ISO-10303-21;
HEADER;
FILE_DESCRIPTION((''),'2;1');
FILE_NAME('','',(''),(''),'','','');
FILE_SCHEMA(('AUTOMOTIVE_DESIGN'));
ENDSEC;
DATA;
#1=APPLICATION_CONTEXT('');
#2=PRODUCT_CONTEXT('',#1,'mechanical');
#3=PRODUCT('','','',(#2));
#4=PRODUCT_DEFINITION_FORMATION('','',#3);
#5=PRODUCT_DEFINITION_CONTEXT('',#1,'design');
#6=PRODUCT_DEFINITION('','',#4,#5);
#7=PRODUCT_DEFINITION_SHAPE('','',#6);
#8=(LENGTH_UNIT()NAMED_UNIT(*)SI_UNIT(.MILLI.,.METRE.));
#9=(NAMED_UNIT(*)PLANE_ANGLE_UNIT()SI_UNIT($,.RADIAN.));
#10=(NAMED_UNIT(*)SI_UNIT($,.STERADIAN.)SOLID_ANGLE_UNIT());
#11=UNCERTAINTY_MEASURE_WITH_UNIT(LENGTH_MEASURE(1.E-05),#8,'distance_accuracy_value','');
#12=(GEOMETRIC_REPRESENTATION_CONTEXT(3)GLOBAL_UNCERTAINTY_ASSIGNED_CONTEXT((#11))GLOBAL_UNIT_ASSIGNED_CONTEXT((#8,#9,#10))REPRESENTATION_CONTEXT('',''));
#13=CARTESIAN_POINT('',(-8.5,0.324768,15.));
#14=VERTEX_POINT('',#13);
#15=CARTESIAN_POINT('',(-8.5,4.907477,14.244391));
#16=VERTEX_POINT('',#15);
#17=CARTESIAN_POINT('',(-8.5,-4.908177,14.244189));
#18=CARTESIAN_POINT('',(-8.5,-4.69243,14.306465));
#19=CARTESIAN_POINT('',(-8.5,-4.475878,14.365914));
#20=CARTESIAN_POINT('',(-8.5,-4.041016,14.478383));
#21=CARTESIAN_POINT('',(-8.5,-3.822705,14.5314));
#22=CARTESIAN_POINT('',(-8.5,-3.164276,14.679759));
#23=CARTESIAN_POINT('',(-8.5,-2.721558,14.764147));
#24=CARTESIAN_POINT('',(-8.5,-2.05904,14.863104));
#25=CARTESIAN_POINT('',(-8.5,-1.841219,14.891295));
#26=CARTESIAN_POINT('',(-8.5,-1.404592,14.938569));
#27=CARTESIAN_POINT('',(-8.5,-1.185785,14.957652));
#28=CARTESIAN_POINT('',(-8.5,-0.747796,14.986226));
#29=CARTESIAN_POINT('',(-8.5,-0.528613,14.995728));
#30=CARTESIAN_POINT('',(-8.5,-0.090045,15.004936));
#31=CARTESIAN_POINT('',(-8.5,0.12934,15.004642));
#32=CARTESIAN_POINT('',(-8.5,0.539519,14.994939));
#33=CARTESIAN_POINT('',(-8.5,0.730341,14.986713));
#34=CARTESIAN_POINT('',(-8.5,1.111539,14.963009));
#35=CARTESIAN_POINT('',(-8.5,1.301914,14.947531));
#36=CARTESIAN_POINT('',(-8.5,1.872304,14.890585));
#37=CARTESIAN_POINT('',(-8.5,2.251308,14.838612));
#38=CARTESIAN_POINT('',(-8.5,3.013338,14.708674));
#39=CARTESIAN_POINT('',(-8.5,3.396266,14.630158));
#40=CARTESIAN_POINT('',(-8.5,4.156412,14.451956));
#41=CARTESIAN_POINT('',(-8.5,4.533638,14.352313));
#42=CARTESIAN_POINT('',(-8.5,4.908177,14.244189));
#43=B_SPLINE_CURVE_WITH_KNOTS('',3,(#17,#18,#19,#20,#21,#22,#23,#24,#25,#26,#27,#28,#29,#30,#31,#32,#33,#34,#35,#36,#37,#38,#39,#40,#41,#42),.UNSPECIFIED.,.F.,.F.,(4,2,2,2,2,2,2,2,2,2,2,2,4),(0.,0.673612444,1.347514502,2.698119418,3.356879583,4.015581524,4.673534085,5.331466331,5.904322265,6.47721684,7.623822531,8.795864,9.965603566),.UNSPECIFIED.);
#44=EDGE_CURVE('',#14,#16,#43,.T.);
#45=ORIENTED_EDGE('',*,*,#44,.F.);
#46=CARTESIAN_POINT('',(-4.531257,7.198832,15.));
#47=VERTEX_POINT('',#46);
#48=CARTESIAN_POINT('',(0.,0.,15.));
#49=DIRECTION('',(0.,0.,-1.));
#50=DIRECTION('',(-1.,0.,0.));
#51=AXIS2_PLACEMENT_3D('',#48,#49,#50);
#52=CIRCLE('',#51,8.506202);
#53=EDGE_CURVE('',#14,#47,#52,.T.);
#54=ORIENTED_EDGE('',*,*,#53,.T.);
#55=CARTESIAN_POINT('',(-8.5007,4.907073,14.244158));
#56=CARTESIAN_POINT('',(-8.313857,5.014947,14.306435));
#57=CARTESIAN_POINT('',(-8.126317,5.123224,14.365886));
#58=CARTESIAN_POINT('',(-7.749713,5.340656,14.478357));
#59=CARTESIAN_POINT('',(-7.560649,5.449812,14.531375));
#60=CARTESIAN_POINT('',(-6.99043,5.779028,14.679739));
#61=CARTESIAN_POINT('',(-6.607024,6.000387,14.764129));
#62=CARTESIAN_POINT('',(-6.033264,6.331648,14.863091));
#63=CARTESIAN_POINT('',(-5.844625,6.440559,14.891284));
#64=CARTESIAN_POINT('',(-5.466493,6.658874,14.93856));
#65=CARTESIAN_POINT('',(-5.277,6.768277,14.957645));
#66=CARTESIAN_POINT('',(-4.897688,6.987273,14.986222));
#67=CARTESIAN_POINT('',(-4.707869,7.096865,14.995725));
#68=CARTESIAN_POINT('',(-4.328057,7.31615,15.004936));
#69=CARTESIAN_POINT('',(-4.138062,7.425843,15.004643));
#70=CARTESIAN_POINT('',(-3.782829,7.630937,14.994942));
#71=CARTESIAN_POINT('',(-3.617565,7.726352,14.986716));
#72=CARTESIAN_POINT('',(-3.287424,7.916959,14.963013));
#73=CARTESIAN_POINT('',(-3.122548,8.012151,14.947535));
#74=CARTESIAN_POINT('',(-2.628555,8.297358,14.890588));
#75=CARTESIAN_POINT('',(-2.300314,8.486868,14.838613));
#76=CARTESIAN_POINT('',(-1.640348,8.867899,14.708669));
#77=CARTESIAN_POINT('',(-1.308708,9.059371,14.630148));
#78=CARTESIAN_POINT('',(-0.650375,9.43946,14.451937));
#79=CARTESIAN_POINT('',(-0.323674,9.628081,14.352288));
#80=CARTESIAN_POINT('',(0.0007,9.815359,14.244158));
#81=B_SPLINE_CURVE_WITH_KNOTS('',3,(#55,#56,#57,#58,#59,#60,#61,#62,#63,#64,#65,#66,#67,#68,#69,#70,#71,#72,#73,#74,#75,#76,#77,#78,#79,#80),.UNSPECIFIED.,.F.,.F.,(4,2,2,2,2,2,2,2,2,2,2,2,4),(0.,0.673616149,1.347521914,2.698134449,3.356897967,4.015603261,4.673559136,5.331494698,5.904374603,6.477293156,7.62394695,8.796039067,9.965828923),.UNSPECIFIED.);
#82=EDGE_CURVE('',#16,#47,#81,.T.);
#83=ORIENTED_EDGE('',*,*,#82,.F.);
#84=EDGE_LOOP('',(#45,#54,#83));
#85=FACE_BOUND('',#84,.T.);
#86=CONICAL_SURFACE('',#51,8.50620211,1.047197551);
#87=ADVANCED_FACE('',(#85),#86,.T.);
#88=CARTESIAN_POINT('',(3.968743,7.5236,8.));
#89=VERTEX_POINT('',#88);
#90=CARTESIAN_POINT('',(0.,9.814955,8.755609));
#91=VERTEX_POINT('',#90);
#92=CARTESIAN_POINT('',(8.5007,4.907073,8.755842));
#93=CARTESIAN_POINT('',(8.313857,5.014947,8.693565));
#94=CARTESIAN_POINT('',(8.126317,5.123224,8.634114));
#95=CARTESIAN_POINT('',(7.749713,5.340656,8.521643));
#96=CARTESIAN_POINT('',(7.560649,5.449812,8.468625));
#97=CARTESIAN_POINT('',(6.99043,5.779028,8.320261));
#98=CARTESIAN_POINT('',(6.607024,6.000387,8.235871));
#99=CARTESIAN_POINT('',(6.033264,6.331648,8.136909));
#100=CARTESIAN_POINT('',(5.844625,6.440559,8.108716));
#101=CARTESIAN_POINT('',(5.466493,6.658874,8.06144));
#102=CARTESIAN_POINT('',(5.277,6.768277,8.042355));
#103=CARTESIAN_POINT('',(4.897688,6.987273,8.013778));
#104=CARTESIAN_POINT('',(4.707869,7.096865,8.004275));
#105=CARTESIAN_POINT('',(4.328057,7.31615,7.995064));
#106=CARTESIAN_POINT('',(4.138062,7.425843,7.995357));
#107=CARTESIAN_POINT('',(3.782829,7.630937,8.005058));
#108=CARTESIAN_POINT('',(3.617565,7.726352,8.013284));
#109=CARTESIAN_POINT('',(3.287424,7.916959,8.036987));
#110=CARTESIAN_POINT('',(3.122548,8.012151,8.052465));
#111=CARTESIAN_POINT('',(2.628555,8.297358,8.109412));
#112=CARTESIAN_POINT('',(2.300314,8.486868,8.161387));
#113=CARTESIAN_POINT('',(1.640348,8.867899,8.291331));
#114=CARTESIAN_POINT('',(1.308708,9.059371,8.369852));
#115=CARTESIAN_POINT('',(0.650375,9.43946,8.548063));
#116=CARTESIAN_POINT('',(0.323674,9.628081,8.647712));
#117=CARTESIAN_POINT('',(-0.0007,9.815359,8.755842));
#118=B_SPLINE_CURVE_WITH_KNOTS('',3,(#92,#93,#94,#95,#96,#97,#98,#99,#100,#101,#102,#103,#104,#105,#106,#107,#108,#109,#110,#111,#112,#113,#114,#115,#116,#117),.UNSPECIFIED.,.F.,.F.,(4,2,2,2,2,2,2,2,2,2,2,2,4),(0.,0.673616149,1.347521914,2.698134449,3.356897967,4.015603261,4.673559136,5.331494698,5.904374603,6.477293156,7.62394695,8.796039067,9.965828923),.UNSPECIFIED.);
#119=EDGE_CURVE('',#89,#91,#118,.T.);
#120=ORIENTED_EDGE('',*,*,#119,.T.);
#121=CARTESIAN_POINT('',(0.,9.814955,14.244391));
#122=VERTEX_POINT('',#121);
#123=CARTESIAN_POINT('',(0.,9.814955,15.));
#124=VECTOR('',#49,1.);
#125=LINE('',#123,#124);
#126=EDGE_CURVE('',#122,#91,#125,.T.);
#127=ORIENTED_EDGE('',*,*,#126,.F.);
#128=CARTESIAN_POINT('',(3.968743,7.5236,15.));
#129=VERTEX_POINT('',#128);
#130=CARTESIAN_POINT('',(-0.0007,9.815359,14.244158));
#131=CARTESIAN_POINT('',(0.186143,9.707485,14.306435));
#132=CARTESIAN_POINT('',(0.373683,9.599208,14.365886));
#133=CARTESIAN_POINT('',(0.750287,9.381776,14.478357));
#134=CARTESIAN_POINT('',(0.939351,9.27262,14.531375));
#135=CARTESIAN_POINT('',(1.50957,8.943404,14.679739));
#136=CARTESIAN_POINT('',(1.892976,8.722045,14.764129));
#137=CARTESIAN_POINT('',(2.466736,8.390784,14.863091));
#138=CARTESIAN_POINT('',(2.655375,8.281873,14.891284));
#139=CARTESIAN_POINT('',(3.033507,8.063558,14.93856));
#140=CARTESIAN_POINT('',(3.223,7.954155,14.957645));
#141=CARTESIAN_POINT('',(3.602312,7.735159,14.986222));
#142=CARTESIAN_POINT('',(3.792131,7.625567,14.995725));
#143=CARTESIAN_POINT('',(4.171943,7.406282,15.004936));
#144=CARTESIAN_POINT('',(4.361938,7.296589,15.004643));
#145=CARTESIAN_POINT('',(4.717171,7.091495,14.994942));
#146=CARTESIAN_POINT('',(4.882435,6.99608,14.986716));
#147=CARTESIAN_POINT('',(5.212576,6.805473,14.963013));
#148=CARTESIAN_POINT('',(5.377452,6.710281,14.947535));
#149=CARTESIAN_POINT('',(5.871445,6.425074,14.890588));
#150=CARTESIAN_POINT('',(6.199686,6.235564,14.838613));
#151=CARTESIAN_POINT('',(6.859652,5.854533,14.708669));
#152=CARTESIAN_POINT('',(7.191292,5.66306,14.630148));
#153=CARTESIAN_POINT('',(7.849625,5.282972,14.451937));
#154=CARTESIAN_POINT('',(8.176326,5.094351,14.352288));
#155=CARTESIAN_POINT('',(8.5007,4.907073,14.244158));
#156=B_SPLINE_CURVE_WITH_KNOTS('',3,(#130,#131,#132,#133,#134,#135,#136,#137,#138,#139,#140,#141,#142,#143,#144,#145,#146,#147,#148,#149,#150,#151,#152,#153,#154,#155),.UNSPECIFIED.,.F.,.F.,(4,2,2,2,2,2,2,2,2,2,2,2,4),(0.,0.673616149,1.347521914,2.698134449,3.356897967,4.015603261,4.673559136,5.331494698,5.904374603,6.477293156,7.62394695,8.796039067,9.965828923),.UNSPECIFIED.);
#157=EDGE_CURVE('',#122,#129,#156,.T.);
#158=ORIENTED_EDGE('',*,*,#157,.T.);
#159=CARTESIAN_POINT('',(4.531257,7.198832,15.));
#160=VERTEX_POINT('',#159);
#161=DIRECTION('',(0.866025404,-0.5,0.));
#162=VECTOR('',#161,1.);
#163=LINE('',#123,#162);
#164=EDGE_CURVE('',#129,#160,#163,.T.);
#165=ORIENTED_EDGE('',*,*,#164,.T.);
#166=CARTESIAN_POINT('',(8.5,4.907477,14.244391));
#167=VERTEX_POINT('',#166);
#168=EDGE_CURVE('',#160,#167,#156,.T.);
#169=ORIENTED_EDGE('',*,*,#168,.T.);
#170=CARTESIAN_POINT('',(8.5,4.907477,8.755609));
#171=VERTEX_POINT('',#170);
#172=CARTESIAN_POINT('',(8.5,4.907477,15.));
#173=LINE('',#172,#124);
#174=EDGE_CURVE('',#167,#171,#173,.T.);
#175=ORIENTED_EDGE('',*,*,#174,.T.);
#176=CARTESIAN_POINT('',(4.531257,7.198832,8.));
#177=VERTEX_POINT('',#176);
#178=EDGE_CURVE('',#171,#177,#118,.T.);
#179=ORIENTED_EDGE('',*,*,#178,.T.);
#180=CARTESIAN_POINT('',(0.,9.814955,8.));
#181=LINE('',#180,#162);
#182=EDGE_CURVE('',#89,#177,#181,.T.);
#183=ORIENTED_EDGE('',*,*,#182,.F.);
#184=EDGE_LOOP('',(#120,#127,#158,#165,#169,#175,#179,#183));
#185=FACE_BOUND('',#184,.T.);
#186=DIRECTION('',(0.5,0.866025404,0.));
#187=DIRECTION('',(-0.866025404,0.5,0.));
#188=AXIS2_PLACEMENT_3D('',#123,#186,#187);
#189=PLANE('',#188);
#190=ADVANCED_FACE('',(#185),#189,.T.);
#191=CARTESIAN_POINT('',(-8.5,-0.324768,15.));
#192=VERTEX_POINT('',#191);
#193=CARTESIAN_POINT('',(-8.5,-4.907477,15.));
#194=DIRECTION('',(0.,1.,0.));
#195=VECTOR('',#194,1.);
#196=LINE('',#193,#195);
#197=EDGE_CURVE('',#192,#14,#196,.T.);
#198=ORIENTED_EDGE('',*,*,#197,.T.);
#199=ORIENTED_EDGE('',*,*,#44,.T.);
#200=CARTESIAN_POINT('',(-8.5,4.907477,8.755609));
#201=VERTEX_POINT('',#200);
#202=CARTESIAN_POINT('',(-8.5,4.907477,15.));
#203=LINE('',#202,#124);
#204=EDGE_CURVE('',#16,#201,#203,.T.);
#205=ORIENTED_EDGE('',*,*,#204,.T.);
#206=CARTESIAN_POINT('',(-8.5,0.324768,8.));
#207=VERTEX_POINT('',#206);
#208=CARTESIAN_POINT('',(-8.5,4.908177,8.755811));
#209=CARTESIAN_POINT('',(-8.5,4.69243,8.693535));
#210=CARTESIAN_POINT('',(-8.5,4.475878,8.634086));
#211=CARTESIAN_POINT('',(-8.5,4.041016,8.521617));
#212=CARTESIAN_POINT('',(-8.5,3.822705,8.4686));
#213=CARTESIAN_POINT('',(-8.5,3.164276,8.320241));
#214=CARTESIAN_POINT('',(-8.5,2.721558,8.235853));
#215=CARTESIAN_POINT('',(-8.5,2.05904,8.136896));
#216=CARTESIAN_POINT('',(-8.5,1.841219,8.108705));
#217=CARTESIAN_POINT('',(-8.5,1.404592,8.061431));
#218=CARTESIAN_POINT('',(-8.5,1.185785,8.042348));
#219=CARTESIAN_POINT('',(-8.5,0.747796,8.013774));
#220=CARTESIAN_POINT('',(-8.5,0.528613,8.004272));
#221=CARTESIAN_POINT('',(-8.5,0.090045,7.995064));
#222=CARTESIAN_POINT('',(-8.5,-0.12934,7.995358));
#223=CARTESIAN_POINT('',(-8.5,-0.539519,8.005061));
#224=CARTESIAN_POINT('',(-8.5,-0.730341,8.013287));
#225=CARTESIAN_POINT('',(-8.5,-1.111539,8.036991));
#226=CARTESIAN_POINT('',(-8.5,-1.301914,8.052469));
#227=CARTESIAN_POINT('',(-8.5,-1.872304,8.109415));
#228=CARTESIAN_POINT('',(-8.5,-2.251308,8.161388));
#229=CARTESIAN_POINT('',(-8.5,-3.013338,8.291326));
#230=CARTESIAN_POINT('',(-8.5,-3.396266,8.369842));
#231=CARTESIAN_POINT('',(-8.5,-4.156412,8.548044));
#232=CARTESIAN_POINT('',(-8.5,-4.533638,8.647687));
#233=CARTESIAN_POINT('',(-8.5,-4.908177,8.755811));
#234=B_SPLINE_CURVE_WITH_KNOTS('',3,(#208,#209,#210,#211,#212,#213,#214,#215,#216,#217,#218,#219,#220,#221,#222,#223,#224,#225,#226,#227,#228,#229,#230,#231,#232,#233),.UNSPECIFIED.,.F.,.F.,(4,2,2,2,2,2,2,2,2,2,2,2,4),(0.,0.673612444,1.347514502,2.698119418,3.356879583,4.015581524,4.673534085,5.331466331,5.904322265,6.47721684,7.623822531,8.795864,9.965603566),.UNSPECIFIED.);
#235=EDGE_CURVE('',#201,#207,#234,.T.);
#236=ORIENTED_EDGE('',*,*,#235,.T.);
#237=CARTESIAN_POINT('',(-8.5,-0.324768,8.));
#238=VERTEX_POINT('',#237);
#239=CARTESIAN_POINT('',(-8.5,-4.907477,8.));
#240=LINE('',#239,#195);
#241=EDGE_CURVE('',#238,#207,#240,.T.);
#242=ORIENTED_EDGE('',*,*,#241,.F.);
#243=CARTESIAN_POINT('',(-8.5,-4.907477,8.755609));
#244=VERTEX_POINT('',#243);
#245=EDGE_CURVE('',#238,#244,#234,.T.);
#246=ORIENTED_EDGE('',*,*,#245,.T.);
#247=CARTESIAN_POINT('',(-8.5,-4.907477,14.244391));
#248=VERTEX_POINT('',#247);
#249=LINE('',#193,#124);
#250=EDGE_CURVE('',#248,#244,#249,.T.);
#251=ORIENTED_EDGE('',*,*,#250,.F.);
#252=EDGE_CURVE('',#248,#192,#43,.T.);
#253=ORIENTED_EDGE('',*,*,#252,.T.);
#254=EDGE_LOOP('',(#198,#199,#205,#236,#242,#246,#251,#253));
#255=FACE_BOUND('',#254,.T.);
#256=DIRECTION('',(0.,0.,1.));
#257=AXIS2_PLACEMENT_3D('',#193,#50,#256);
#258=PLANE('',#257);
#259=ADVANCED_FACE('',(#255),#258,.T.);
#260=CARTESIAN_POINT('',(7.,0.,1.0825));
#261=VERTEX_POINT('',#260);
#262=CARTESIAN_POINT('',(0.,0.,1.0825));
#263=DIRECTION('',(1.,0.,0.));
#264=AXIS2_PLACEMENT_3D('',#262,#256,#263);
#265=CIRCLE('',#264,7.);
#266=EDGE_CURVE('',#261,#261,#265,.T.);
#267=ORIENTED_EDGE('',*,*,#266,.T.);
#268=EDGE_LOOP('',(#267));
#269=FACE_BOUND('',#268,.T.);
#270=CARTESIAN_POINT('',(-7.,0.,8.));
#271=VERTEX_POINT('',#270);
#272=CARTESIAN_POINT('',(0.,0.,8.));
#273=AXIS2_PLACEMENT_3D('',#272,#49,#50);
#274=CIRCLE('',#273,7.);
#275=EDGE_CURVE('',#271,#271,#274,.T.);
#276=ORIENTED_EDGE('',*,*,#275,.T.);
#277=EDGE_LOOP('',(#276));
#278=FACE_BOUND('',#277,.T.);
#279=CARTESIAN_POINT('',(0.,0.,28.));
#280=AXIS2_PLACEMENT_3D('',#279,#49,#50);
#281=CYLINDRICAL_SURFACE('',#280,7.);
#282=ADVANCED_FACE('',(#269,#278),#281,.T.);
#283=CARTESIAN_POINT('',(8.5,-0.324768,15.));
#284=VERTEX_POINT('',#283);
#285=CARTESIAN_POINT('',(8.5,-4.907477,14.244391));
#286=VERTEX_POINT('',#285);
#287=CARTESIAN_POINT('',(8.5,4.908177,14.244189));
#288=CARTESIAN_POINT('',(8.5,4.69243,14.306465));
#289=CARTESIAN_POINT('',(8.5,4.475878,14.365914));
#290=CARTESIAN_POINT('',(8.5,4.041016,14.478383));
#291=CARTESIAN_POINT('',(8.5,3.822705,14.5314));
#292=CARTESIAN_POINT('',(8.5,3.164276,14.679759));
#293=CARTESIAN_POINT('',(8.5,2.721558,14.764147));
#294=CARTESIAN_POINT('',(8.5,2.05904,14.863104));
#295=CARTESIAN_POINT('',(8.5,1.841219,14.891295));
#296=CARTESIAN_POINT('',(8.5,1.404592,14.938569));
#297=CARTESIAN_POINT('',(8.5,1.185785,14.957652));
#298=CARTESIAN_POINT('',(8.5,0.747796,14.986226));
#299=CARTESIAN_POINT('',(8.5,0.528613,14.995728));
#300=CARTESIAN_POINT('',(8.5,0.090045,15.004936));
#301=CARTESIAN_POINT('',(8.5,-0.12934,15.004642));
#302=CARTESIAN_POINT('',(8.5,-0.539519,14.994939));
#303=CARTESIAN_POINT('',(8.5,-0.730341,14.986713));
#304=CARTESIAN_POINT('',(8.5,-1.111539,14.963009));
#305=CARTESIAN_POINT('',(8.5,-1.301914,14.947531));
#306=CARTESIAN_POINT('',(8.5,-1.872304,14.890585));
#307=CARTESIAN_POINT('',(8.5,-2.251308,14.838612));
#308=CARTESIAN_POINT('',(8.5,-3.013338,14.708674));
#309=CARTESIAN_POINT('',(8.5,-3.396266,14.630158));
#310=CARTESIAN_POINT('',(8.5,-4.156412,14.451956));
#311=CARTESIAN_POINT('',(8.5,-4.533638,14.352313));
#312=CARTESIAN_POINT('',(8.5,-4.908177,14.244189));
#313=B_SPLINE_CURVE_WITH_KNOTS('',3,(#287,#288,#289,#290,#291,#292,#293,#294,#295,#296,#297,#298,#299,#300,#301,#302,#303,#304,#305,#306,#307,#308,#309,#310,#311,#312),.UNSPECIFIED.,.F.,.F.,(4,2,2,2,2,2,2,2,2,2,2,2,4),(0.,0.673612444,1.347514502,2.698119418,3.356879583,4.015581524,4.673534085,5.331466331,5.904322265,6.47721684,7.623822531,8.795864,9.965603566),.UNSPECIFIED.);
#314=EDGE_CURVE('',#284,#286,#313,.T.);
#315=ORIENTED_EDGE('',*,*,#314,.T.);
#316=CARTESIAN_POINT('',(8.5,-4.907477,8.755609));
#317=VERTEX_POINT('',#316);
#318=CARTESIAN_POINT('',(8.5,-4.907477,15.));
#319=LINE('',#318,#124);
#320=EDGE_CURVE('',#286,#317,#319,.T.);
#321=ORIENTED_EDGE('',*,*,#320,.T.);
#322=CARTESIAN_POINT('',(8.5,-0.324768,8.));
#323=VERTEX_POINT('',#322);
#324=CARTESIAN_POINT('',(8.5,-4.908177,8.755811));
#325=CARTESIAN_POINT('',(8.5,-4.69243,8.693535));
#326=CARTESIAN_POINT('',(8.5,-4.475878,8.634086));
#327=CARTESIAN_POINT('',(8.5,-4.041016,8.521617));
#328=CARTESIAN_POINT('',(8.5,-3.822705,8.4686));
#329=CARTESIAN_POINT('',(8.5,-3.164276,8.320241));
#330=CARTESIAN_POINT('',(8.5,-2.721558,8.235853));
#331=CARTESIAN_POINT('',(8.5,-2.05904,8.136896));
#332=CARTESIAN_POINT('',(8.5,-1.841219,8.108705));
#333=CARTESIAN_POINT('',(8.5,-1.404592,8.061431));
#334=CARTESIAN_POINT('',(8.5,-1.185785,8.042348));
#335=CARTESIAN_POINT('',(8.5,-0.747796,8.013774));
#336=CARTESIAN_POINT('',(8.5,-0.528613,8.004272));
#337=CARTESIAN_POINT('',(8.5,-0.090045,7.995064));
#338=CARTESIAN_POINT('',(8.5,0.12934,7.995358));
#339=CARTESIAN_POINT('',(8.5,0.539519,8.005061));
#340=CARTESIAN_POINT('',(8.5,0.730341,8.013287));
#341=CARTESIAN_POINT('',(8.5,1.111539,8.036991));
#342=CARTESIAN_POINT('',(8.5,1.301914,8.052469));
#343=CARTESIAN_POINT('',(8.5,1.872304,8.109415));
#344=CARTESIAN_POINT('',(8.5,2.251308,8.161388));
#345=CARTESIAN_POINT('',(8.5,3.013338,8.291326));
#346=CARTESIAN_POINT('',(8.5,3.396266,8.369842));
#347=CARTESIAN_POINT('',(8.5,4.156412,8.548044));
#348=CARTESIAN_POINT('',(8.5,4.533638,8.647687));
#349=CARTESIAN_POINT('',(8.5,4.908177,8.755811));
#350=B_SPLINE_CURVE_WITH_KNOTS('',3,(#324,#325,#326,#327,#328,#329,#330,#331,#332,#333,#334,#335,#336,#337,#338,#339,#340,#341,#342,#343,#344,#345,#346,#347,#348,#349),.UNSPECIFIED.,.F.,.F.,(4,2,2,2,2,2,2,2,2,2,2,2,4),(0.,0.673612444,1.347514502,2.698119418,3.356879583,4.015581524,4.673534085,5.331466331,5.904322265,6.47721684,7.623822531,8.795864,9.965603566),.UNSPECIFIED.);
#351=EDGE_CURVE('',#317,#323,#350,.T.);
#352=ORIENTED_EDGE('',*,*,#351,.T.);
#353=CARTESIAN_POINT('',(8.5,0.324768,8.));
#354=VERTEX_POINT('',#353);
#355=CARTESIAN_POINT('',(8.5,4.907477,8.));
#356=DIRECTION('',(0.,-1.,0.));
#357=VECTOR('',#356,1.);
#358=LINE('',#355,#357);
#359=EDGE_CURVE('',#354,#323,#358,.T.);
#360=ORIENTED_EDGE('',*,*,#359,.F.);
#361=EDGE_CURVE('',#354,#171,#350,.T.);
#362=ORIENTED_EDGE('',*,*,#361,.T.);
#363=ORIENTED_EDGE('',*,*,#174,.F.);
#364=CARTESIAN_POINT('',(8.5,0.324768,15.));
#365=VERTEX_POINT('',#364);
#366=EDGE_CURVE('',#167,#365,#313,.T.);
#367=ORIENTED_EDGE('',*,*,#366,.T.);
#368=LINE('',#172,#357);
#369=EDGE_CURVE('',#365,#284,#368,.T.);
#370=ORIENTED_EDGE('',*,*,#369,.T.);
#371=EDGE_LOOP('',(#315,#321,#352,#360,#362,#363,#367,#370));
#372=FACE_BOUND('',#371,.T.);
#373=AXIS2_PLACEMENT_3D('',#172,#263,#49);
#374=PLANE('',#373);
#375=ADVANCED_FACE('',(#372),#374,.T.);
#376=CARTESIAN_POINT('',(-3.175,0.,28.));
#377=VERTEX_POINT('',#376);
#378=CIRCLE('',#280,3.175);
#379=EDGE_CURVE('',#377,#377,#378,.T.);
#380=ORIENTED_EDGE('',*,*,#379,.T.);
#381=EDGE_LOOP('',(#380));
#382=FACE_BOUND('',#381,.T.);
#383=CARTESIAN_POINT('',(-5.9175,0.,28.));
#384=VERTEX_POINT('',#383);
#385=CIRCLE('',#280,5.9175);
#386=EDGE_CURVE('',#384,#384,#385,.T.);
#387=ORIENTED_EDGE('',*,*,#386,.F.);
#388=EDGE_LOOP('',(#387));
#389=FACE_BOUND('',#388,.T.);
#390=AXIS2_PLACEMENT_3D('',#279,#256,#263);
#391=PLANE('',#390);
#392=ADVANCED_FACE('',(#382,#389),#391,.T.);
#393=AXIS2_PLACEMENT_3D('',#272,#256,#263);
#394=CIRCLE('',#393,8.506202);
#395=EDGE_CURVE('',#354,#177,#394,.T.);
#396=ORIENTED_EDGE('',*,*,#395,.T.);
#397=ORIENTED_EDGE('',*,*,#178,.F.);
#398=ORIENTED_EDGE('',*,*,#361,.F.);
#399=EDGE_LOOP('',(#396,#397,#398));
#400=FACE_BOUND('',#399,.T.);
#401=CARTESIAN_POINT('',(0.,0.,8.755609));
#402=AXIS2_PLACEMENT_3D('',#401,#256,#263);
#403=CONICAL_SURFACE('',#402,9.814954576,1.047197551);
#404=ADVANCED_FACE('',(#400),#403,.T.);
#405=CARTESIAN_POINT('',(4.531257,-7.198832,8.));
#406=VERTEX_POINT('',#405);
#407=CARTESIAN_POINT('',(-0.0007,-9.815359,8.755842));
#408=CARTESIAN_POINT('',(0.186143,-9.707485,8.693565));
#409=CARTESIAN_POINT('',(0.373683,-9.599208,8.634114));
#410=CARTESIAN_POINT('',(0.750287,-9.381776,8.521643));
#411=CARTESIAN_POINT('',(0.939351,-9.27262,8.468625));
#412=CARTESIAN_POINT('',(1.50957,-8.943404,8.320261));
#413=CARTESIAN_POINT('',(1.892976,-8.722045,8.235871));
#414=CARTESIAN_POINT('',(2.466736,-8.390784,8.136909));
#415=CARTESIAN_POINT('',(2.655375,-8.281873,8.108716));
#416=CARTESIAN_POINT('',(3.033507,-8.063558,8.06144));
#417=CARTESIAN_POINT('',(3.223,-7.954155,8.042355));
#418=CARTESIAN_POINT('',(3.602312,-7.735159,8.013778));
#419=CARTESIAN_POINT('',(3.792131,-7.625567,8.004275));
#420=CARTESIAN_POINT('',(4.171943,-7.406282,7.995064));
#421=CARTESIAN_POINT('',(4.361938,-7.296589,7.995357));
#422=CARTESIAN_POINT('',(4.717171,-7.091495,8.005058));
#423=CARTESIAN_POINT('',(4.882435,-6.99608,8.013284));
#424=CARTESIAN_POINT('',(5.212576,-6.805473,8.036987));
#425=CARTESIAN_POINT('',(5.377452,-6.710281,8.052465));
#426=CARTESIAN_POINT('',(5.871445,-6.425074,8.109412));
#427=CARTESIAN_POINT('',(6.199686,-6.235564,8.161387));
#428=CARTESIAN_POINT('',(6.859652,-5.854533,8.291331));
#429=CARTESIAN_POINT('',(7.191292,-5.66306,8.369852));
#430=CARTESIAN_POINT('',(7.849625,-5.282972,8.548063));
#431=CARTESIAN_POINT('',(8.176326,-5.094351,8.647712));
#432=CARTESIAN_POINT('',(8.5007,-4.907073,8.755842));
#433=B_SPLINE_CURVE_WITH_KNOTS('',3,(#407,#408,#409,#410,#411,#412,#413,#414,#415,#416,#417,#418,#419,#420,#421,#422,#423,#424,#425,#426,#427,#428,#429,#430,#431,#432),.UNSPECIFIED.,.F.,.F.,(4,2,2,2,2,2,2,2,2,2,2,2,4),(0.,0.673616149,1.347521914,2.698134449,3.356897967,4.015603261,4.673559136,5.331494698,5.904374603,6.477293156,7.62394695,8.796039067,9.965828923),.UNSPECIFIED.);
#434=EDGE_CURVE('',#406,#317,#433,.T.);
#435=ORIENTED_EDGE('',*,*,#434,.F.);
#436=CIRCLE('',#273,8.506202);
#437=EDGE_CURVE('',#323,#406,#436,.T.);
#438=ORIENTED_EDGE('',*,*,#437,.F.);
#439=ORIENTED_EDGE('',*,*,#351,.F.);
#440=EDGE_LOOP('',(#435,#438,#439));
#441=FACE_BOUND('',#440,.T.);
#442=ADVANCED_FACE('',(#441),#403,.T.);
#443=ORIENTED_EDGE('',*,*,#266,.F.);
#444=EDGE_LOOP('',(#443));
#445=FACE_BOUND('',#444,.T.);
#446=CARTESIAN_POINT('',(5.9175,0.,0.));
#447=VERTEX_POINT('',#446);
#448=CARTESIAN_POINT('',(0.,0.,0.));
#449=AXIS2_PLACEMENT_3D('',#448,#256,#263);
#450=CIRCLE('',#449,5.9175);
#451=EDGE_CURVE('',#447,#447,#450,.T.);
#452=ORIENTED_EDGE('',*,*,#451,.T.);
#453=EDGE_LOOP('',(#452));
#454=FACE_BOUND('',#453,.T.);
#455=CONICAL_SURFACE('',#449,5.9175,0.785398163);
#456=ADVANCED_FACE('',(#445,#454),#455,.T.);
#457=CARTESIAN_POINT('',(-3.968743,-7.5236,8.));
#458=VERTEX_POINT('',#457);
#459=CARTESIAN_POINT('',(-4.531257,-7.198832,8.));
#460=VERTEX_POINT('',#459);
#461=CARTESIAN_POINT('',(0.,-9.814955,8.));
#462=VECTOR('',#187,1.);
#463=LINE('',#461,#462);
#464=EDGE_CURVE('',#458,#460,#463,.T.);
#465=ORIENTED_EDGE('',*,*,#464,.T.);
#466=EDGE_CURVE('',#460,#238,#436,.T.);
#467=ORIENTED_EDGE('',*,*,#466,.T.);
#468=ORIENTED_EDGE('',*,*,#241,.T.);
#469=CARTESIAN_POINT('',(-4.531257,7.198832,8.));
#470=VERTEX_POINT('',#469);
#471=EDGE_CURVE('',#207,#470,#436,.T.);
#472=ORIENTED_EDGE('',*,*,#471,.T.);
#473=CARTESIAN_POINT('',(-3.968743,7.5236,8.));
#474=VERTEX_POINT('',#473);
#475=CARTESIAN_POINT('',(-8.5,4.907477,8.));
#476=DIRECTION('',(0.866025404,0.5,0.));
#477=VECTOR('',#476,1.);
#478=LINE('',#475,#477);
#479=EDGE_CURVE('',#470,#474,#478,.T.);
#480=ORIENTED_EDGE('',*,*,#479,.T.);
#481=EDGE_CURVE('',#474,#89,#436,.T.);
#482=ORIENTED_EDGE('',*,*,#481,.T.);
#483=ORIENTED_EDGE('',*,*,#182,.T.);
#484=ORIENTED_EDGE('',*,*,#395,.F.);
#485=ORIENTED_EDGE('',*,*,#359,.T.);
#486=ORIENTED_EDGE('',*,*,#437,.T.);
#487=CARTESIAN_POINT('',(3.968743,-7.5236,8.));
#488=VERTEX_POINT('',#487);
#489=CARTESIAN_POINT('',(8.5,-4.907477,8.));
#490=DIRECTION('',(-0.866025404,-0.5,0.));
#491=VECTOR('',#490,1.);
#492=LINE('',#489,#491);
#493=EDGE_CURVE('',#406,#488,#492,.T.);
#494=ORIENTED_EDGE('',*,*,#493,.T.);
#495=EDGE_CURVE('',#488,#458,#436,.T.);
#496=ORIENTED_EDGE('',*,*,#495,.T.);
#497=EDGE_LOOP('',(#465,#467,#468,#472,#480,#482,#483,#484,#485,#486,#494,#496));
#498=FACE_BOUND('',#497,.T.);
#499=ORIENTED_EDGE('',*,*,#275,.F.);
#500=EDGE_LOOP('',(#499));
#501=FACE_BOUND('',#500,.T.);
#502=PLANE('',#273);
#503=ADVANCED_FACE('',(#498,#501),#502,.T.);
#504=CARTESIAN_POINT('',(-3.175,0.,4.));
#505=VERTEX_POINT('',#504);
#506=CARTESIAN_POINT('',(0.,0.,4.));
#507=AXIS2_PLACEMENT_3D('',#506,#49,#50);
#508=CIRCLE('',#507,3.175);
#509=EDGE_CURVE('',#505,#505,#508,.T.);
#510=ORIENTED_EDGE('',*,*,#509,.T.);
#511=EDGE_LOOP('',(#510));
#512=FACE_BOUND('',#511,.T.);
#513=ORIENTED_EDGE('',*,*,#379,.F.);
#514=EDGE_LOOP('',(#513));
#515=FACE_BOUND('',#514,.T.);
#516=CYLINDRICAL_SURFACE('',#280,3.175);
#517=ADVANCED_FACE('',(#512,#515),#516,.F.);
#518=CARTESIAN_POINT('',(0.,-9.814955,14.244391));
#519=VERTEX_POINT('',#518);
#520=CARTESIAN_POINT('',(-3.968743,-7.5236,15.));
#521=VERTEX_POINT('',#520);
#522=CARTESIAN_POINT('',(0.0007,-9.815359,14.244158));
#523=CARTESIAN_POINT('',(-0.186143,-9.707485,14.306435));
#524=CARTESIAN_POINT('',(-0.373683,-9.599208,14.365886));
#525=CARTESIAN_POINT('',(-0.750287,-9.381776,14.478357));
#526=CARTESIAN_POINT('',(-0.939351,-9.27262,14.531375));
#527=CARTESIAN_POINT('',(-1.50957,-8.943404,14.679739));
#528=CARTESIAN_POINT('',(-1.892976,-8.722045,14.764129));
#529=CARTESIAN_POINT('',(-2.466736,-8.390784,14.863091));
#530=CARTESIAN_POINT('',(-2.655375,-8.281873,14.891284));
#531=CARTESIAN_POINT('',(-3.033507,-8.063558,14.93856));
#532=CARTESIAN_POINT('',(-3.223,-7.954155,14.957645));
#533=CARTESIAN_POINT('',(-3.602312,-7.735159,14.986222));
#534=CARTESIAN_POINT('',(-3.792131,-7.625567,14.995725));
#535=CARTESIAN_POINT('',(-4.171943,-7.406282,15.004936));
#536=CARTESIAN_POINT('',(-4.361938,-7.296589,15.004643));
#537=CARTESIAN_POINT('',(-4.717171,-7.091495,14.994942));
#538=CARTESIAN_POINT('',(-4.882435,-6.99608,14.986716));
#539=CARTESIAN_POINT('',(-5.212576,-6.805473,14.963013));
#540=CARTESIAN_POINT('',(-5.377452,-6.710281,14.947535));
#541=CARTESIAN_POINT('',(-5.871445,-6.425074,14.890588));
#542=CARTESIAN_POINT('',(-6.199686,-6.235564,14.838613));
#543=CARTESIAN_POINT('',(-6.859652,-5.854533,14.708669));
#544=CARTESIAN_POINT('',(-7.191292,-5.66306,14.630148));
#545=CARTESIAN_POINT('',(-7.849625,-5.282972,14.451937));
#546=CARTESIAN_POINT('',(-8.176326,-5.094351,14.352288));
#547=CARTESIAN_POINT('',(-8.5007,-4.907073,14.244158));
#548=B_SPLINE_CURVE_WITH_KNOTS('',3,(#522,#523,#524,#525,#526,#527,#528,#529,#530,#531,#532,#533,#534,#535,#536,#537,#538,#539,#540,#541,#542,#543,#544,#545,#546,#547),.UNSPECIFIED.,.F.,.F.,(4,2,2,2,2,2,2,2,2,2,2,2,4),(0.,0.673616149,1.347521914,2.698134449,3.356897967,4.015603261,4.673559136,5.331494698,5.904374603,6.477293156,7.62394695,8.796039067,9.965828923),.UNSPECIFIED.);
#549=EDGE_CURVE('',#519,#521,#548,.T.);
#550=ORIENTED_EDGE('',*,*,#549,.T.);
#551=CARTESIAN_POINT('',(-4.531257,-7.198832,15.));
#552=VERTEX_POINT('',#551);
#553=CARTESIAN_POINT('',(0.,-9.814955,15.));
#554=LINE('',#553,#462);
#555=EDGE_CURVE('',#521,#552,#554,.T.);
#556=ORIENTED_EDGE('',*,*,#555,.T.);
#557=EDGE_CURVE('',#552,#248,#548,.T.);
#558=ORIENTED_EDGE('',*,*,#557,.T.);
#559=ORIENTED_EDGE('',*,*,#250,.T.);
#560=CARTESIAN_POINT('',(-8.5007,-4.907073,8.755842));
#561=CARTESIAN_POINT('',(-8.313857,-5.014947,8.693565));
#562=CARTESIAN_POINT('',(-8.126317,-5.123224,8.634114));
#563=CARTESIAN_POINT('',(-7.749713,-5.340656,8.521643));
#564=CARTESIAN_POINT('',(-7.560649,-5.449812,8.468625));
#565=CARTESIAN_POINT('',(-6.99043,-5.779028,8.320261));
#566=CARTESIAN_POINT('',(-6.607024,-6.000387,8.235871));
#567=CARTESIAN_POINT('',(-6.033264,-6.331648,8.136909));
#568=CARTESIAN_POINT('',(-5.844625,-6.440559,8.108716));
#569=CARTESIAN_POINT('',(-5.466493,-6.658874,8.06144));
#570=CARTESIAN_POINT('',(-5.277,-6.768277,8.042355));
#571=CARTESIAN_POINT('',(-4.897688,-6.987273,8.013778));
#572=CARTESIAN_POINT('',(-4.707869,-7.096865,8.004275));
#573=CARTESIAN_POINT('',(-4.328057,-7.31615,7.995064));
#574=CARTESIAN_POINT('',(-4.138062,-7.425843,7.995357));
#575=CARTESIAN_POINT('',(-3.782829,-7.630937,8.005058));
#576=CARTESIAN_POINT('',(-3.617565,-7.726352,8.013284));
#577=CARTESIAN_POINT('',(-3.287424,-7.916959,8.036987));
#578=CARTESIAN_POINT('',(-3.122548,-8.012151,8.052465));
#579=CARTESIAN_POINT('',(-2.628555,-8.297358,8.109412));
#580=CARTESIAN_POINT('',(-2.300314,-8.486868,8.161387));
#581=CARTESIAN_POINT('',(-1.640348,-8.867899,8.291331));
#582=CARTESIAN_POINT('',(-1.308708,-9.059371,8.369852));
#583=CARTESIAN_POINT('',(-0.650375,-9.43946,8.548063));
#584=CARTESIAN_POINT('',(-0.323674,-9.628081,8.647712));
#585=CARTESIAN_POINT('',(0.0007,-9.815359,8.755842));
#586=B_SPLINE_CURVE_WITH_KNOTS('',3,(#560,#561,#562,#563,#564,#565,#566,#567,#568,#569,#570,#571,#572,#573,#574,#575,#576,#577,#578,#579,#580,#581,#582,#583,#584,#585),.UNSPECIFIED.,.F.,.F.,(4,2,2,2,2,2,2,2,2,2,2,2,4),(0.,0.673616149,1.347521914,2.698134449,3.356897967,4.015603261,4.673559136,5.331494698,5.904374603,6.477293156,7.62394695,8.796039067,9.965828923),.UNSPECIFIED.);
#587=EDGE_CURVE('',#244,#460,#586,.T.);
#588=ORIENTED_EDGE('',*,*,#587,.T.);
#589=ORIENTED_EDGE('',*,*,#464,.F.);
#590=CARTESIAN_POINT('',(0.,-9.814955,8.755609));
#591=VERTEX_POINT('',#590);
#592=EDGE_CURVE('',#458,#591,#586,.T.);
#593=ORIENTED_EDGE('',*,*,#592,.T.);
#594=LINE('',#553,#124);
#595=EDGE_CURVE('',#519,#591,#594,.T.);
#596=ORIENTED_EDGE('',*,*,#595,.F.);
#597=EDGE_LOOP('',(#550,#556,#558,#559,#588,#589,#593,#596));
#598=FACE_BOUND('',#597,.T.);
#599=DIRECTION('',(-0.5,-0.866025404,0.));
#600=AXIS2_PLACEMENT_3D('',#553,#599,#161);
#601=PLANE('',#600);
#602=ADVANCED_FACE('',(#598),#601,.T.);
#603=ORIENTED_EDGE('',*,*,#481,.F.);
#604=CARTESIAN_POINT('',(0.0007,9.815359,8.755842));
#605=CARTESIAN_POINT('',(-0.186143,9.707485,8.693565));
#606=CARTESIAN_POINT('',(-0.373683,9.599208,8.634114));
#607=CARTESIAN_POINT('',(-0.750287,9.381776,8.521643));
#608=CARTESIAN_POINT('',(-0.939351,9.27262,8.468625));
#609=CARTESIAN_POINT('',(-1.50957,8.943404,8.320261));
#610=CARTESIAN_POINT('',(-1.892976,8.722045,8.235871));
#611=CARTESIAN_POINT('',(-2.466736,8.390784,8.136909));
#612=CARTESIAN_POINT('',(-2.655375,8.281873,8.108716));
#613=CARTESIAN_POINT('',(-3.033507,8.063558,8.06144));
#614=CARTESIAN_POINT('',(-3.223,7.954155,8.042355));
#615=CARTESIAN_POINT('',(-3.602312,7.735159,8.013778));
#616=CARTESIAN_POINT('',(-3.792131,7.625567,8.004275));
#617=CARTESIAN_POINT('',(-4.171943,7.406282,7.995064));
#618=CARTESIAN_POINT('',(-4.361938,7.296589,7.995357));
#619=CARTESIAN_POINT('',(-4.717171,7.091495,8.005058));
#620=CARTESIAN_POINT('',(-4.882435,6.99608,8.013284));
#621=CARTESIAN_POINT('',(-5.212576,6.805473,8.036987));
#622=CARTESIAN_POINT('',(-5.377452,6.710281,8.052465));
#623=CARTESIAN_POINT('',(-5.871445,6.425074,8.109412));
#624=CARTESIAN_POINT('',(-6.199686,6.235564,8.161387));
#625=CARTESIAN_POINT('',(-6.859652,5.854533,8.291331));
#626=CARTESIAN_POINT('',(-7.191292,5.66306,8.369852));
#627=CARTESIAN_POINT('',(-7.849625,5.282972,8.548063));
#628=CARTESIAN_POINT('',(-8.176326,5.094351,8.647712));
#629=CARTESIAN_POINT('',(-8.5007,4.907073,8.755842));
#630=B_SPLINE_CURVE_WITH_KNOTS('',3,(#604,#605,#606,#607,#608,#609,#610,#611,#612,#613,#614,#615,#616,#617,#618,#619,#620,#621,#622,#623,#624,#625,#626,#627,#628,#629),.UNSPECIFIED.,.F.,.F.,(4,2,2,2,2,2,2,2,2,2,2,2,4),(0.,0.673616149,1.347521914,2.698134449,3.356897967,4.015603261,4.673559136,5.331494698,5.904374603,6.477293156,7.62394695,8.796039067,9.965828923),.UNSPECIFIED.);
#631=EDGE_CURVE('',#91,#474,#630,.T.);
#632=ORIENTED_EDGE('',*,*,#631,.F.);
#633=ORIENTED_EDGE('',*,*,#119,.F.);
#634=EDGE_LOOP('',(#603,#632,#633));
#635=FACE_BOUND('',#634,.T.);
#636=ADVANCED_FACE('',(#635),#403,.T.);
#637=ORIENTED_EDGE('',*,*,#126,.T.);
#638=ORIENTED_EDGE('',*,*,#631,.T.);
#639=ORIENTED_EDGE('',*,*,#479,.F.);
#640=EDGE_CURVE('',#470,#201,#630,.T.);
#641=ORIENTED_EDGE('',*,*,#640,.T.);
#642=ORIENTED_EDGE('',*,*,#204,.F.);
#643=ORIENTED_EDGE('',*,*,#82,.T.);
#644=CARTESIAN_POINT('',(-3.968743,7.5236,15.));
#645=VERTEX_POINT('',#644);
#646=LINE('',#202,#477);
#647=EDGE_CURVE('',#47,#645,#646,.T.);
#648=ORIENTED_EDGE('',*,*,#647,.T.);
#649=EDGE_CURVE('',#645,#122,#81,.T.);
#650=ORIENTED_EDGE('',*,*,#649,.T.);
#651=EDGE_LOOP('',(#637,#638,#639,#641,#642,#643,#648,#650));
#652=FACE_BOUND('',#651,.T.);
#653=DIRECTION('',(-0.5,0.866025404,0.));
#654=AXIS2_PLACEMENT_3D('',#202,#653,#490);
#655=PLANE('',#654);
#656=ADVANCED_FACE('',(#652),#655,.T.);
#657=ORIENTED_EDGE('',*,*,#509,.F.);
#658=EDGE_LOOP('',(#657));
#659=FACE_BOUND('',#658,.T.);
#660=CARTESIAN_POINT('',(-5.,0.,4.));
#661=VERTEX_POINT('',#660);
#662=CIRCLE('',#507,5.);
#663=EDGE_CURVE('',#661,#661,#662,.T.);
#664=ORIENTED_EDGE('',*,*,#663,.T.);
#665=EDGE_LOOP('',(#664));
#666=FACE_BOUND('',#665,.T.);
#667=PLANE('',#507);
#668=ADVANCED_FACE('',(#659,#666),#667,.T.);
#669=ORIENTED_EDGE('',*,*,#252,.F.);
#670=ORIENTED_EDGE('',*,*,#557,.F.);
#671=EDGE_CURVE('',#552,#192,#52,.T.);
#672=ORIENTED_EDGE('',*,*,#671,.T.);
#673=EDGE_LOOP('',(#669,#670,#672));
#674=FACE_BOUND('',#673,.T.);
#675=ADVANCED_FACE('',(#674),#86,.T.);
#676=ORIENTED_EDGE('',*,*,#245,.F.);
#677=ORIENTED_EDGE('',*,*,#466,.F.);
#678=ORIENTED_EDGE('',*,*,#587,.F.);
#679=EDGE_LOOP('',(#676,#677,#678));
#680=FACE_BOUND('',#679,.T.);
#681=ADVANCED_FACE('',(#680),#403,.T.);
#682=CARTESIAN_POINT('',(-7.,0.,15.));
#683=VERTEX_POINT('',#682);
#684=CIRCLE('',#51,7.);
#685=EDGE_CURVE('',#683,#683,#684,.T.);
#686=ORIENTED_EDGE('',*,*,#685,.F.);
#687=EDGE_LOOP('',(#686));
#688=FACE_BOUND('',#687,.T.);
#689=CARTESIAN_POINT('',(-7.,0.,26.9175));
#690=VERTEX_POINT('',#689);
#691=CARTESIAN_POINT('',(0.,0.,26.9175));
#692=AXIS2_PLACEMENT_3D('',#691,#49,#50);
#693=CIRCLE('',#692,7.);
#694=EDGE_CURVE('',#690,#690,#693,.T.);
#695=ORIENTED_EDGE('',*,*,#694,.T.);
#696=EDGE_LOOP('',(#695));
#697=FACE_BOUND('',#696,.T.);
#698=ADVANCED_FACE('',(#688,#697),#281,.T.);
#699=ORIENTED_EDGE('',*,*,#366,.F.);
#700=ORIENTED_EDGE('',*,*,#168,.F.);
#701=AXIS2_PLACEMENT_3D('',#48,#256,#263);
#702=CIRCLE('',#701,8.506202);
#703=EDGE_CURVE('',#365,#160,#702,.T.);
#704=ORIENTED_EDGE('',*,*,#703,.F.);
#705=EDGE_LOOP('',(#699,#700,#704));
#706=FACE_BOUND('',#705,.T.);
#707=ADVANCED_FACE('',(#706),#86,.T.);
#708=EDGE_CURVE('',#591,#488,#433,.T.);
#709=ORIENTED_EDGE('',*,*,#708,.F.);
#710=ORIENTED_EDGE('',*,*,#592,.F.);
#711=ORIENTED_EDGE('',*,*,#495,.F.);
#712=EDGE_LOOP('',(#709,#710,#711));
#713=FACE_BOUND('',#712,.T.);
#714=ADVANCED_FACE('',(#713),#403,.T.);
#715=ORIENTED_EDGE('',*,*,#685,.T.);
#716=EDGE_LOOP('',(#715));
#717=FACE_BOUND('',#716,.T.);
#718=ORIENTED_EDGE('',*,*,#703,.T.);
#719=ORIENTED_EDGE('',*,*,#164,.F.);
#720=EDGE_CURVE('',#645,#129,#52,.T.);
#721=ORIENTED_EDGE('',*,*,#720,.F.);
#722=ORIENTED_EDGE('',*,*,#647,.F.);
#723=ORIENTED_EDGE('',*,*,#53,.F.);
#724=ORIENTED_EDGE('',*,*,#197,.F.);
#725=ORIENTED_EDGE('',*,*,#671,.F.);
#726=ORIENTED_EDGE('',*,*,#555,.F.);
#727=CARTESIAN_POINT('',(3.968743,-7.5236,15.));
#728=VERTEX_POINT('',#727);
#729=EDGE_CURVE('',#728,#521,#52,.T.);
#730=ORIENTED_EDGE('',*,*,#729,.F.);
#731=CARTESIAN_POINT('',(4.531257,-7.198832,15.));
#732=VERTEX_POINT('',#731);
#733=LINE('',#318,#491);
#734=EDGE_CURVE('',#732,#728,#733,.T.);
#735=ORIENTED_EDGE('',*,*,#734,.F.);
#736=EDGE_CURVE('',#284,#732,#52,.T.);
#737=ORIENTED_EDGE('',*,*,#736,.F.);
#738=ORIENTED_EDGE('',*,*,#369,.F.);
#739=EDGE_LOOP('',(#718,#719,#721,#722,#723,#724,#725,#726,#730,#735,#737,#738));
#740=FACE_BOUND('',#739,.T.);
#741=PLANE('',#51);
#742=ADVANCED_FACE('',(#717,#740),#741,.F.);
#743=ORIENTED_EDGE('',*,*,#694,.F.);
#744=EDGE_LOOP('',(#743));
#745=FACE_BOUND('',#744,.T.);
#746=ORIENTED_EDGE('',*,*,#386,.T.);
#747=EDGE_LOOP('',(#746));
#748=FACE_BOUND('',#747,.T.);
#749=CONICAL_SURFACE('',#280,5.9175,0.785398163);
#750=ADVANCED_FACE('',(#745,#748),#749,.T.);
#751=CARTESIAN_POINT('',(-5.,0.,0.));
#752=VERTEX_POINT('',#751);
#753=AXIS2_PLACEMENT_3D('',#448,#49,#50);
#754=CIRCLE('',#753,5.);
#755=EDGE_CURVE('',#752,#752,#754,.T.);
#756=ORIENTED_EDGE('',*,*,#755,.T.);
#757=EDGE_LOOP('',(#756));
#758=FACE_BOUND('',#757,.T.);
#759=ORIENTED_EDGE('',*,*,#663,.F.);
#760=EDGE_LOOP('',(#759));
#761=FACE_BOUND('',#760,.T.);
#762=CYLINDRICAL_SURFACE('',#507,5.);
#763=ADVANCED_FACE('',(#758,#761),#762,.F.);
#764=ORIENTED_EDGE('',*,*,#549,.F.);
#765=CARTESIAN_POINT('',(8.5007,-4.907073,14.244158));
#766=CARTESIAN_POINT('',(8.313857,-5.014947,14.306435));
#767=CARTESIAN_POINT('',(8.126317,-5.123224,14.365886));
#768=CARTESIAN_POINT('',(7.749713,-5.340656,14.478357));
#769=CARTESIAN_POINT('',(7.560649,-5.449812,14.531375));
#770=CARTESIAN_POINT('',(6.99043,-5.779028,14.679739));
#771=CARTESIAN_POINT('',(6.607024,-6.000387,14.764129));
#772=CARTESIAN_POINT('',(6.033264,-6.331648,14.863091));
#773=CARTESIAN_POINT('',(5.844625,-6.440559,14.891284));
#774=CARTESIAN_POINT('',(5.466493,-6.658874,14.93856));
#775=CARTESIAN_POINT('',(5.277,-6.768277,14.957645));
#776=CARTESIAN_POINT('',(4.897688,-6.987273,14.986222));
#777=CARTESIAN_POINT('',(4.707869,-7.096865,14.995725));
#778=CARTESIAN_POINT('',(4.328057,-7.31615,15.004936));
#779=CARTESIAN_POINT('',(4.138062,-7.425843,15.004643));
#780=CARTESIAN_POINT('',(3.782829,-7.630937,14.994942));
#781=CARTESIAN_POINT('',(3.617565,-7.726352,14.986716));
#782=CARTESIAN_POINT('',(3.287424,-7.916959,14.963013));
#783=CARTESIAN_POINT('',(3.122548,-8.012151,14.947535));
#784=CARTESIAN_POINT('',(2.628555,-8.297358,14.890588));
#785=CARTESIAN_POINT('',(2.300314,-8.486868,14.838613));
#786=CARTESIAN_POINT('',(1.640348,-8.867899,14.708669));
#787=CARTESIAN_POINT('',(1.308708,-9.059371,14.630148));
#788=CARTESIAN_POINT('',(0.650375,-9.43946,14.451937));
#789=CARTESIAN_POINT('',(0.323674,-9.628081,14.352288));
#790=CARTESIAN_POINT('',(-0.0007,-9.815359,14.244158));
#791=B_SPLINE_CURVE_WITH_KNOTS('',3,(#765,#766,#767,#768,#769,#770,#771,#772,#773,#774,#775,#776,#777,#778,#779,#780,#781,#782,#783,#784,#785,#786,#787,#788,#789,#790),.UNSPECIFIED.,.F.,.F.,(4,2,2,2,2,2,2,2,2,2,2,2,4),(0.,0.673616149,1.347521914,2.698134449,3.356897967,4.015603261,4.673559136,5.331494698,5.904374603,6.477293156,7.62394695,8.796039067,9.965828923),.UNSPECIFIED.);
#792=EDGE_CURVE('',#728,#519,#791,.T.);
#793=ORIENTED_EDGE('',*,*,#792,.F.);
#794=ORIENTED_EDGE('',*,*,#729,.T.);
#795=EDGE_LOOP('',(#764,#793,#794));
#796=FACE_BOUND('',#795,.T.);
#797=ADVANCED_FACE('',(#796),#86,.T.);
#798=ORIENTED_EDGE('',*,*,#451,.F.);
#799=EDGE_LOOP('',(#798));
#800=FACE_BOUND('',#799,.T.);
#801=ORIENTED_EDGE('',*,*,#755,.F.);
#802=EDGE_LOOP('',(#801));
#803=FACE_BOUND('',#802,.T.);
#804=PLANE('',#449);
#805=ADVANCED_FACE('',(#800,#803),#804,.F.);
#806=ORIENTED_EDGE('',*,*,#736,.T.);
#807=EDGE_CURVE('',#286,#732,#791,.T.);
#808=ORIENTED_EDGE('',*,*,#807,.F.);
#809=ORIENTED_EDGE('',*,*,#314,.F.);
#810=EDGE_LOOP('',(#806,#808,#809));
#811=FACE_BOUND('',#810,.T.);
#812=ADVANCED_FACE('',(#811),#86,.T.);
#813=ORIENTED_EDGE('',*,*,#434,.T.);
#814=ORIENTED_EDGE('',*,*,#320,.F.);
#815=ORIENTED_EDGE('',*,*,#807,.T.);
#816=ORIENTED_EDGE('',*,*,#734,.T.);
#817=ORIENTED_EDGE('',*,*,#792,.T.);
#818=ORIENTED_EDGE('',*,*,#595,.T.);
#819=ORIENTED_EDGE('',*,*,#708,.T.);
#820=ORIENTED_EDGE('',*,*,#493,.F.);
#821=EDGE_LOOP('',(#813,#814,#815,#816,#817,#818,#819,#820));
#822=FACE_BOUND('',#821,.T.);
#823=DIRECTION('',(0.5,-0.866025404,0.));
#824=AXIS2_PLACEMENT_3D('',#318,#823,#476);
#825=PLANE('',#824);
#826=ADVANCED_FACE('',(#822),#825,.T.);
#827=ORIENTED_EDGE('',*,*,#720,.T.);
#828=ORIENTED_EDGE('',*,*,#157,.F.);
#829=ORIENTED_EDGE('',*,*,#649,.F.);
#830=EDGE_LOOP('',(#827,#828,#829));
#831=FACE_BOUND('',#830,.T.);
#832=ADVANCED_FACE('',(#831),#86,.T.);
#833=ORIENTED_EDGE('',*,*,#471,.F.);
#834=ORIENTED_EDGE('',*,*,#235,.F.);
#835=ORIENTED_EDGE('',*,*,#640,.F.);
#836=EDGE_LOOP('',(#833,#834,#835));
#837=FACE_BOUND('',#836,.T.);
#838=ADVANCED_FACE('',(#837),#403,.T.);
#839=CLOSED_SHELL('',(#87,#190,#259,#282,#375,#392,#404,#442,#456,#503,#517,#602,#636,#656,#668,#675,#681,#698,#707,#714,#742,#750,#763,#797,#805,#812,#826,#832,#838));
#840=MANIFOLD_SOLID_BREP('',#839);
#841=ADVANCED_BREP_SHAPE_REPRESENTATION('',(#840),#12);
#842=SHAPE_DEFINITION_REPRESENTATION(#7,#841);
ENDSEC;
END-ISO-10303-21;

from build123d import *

# Parameters (mm, degrees)
SKETCH_1_R          = 7
EXTRUDE_1_DEPTH     = 28
EXTRUDE_START       = -8
EXTRUDE_2_DEPTH     = 7
SKETCH_6_R          = 5
CUT_EXTRUDE_1_DEPTH = 4
SKETCH_7_R          = 3.175
CUT_EXTRUDE_2_DEPTH = 28.287054318


# Read off the part's stored shape, not the designer's step: M14 机械螺纹 螺柱1, M14 机械螺纹 螺柱2
with BuildPart() as part:
    # 草图1 → 凸台-拉伸1 (new body)
    with BuildSketch(Plane.XY):
        Circle(SKETCH_1_R)
    extrude(amount=EXTRUDE_1_DEPTH)

    # M14 机械螺纹 螺柱1 outline → M14 机械螺纹 螺柱1 (revolve, cut)
    with BuildSketch(Plane.XZ):
        Polygon((7, 28), (5.9175, 28), (7, 26.9175), align=None)
    revolve(axis=Axis((0, 0, 0), (0, 0, 1)), mode=Mode.SUBTRACT)

    # M14 机械螺纹 螺柱2 outline → M14 机械螺纹 螺柱2 (revolve, cut)
    with BuildSketch(Plane.XZ):
        Polygon((7, 1.0825), (5.9175, 0), (7, 0), align=None)
    revolve(axis=Axis((0, 0, 0), (0, 0, 1)), mode=Mode.SUBTRACT)

    # 草图4 → 凸台-拉伸2 (add)
    with BuildSketch(Plane(origin=(0, 0, 0), x_dir=(-1, 0, 0), z_dir=(0, 0, -1)).offset(EXTRUDE_START)):
        Polygon((0, 9.814954576), (-8.5, 4.907477288), (-8.5, -4.907477288), (0, -9.814954576), (8.5, -4.907477288), (8.5, 4.907477288), align=None)
    extrude(amount=-EXTRUDE_2_DEPTH)

    # 草图5 → 切除-旋转1 (revolve, cut)
    with BuildSketch(Plane(origin=(0, 0, 0), x_dir=(0, 0, -1), z_dir=(1, 0, 0)), mode=Mode.PRIVATE) as cut_revolve_1_sk:
        Polygon((-8, 8.50620211), (-8.755608589, 9.814954576), (-8, 9.814954576), align=None)
        Polygon((-15, 8.50620211), (-14.244391411, 9.814954576), (-15, 9.814954576), align=None)
    revolve(cut_revolve_1_sk.sketch.rotate(Axis((0, 0, 0), (0, 0, -1)), 270), axis=Axis((0, 0, 0), (0, 0, -1)), mode=Mode.SUBTRACT)

    # 草图6 → 切除-拉伸1 (cut)
    with BuildSketch(Plane(origin=(0, 0, 0), x_dir=(-1, 0, 0), z_dir=(0, 0, -1))):
        Circle(SKETCH_6_R)
    extrude(amount=-CUT_EXTRUDE_1_DEPTH, mode=Mode.SUBTRACT)

    # 草图7 → 切除-拉伸2 (cut, through all)
    with BuildSketch(Plane(origin=(0, 0, 4), x_dir=(-1, 0, 0), z_dir=(0, 0, -1))):
        Circle(SKETCH_7_R)
    extrude(amount=-CUT_EXTRUDE_2_DEPTH, mode=Mode.SUBTRACT)


solid = part.part
